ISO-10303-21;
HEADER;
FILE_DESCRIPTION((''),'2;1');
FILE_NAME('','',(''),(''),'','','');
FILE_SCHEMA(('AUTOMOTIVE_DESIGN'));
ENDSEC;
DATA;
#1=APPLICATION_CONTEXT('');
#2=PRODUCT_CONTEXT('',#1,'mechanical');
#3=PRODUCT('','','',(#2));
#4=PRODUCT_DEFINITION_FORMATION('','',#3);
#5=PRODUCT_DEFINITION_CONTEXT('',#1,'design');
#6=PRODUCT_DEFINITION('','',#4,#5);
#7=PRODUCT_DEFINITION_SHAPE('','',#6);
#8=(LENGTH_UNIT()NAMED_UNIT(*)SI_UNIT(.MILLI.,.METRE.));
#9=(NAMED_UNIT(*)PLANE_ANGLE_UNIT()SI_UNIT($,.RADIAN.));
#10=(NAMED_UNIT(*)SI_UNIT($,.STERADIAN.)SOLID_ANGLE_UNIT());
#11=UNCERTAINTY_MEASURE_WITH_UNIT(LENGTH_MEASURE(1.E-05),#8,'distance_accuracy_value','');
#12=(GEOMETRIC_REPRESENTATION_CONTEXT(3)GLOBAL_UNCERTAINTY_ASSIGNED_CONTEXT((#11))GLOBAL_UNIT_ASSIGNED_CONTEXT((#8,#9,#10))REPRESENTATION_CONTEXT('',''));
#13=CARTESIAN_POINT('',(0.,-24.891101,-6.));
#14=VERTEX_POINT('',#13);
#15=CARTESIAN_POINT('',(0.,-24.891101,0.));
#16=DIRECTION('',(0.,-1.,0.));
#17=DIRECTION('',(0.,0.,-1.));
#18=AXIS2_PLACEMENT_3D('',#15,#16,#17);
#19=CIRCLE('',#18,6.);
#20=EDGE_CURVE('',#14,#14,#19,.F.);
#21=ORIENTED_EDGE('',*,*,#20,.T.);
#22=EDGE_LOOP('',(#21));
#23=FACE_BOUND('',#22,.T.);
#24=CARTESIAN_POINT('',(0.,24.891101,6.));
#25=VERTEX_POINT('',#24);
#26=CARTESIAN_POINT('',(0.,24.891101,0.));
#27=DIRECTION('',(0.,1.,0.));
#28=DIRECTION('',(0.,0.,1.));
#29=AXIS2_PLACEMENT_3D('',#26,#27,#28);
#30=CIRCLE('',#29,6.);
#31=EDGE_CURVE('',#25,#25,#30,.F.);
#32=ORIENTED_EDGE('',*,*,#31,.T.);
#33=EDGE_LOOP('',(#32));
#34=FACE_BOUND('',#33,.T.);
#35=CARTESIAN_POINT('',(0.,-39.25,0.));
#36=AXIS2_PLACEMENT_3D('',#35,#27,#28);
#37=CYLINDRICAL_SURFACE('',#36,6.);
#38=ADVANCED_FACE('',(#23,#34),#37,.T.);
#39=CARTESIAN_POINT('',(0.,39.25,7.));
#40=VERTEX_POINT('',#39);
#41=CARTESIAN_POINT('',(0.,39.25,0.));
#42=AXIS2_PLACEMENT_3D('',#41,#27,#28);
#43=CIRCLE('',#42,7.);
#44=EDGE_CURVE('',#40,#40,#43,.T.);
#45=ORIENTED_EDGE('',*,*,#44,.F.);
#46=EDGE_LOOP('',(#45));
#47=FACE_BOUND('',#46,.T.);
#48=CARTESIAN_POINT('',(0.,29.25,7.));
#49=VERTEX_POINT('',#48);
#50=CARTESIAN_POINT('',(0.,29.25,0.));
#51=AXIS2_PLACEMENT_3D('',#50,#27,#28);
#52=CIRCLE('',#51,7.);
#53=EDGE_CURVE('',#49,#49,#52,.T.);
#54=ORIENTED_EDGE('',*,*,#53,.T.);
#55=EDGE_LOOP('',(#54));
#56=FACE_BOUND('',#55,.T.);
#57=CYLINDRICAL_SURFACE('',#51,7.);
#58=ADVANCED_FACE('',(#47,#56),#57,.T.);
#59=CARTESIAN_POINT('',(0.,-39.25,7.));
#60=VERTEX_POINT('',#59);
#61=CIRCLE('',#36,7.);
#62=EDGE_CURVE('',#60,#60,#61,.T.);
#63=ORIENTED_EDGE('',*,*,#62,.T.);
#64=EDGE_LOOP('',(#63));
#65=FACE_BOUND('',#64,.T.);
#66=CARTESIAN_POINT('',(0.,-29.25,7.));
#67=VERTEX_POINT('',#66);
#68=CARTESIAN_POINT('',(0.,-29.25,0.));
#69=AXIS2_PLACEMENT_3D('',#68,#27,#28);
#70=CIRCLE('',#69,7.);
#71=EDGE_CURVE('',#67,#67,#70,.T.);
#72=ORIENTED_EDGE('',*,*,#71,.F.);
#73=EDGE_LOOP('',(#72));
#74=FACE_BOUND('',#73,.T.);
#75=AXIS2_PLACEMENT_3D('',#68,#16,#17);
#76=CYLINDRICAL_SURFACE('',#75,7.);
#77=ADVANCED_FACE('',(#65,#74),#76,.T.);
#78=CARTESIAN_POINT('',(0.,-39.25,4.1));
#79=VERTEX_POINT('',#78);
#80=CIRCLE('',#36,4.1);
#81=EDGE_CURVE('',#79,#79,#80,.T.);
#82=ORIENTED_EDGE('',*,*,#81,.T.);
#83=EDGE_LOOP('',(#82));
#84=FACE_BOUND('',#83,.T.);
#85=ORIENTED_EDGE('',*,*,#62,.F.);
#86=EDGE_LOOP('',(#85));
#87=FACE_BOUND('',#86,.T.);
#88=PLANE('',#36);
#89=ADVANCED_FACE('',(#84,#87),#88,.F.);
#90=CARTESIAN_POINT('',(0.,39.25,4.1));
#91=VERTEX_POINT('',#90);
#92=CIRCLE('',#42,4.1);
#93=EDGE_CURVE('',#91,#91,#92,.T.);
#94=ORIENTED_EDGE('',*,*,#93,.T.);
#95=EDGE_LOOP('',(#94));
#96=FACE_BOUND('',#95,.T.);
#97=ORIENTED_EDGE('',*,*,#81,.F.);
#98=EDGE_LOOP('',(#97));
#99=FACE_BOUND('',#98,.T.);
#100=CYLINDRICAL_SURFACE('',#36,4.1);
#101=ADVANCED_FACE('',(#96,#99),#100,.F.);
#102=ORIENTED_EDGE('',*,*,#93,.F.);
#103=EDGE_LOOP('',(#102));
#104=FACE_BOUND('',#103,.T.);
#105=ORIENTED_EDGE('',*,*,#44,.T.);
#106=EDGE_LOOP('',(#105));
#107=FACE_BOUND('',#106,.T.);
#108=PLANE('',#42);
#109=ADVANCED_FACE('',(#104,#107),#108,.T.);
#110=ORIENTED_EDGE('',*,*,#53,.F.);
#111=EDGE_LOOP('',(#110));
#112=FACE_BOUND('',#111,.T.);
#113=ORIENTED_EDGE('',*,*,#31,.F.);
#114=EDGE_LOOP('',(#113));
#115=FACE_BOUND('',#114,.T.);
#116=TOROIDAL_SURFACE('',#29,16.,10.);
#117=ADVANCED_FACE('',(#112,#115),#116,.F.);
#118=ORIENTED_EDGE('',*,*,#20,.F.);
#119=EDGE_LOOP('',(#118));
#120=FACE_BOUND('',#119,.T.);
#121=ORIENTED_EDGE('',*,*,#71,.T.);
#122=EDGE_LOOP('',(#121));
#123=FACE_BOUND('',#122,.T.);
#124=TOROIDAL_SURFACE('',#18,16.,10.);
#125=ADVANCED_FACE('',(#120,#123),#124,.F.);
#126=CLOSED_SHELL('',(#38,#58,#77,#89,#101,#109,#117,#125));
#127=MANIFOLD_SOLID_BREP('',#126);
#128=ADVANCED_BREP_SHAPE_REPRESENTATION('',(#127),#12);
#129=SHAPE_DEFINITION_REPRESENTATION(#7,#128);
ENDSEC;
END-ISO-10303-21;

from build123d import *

# Parameters (mm, degrees)
Y_KSEKLIK_EKSTR_ZYON1_DEPTH      = 39.25
Y_KSEKLIK_EKSTR_ZYON1_DEPTH_BACK = 39.25
IZIM1_R                          = 6
IZIM1_R_2                        = 4.1
IZIM2_R                          = 7
IZIM2_R_2                        = 4.1
Y_KSEKLIK_EKSTR_ZYON2_DEPTH      = 10
RADYUS1_R                        = 10


with BuildPart() as part:
    # Çizim1 → Yükseklik-Ekstrüzyon1 (new, two sides: drawn at the far end of the back side and taken through both)
    with BuildSketch(Plane(origin=(0, 0, 0), x_dir=(1, 0, 0), z_dir=(0, 1, 0)).offset(-Y_KSEKLIK_EKSTR_ZYON1_DEPTH_BACK)):
        with Locations(Location((0, 0, 0), (0, 0, 270))):
            Circle(IZIM1_R)
        with Locations(Location((0, 0, 0), (0, 0, 270))):
            Circle(IZIM1_R_2, mode=Mode.SUBTRACT)
    extrude(amount=Y_KSEKLIK_EKSTR_ZYON1_DEPTH + Y_KSEKLIK_EKSTR_ZYON1_DEPTH_BACK)

    # Çizim2 → Yükseklik-Ekstrüzyon2 (add)
    with BuildSketch(Plane(origin=(0, 39.25, 0), x_dir=(1, 0, 0), z_dir=(0, 1, 0))):
        with Locations(Location((0, 0, 0), (0, 0, 270))):
            Circle(IZIM2_R)
        with Locations(Location((0, 0, 0), (0, 0, 270))):
            Circle(IZIM2_R_2, mode=Mode.SUBTRACT)
    y_kseklik_ekstr_zyon2 = extrude(amount=-Y_KSEKLIK_EKSTR_ZYON2_DEPTH)

    # Aynalama1: Yükseklik-Ekstrüzyon2 across plane
    add(y_kseklik_ekstr_zyon2.mirror(Plane.ZX))

    # Radyus1
    # the kernel refuses this fillet: 10 mm, written as the material it adds along each edge
    with BuildSketch(Plane(origin=(0, 29.25, 0), x_dir=(0, 0, 1), z_dir=(1, 0, 0))) as radyus1_piece_1:
        with BuildLine():
            CenterArc((16, 4.358898944), RADYUS1_R, 180, 25.841932763)
            Line((7, 0), (6.82, -0.087177979))
            ThreePointArc((6.82, -0.087177979), (6.5, -0.2), (6, -0.2))
            Line((6, -0.2), (5.8, 0))
            Line((5.8, 0), (5.8, 4.358898944))
            Line((5.8, 4.358898944), (6, 4.358898944))
        make_face()
    revolve(axis=Axis((0, 29.25, 0), (0, -1, 0)))
    with BuildSketch(Plane(origin=(0, -29.25, 0), x_dir=(0, 0, 1), z_dir=(-1, 0, 0))) as radyus1_piece_2:
        with BuildLine():
            CenterArc((16, 4.358898944), RADYUS1_R, 180, 25.841932763)
            Line((7, 0), (6.82, -0.087177979))
            ThreePointArc((6.82, -0.087177979), (6.5, -0.2), (6, -0.2))
            Line((6, -0.2), (5.8, 0))
            Line((5.8, 0), (5.8, 4.358898944))
            Line((5.8, 4.358898944), (6, 4.358898944))
        make_face()
    revolve(axis=Axis((0, -29.25, 0), (0, 1, 0)))


solid = part.part
